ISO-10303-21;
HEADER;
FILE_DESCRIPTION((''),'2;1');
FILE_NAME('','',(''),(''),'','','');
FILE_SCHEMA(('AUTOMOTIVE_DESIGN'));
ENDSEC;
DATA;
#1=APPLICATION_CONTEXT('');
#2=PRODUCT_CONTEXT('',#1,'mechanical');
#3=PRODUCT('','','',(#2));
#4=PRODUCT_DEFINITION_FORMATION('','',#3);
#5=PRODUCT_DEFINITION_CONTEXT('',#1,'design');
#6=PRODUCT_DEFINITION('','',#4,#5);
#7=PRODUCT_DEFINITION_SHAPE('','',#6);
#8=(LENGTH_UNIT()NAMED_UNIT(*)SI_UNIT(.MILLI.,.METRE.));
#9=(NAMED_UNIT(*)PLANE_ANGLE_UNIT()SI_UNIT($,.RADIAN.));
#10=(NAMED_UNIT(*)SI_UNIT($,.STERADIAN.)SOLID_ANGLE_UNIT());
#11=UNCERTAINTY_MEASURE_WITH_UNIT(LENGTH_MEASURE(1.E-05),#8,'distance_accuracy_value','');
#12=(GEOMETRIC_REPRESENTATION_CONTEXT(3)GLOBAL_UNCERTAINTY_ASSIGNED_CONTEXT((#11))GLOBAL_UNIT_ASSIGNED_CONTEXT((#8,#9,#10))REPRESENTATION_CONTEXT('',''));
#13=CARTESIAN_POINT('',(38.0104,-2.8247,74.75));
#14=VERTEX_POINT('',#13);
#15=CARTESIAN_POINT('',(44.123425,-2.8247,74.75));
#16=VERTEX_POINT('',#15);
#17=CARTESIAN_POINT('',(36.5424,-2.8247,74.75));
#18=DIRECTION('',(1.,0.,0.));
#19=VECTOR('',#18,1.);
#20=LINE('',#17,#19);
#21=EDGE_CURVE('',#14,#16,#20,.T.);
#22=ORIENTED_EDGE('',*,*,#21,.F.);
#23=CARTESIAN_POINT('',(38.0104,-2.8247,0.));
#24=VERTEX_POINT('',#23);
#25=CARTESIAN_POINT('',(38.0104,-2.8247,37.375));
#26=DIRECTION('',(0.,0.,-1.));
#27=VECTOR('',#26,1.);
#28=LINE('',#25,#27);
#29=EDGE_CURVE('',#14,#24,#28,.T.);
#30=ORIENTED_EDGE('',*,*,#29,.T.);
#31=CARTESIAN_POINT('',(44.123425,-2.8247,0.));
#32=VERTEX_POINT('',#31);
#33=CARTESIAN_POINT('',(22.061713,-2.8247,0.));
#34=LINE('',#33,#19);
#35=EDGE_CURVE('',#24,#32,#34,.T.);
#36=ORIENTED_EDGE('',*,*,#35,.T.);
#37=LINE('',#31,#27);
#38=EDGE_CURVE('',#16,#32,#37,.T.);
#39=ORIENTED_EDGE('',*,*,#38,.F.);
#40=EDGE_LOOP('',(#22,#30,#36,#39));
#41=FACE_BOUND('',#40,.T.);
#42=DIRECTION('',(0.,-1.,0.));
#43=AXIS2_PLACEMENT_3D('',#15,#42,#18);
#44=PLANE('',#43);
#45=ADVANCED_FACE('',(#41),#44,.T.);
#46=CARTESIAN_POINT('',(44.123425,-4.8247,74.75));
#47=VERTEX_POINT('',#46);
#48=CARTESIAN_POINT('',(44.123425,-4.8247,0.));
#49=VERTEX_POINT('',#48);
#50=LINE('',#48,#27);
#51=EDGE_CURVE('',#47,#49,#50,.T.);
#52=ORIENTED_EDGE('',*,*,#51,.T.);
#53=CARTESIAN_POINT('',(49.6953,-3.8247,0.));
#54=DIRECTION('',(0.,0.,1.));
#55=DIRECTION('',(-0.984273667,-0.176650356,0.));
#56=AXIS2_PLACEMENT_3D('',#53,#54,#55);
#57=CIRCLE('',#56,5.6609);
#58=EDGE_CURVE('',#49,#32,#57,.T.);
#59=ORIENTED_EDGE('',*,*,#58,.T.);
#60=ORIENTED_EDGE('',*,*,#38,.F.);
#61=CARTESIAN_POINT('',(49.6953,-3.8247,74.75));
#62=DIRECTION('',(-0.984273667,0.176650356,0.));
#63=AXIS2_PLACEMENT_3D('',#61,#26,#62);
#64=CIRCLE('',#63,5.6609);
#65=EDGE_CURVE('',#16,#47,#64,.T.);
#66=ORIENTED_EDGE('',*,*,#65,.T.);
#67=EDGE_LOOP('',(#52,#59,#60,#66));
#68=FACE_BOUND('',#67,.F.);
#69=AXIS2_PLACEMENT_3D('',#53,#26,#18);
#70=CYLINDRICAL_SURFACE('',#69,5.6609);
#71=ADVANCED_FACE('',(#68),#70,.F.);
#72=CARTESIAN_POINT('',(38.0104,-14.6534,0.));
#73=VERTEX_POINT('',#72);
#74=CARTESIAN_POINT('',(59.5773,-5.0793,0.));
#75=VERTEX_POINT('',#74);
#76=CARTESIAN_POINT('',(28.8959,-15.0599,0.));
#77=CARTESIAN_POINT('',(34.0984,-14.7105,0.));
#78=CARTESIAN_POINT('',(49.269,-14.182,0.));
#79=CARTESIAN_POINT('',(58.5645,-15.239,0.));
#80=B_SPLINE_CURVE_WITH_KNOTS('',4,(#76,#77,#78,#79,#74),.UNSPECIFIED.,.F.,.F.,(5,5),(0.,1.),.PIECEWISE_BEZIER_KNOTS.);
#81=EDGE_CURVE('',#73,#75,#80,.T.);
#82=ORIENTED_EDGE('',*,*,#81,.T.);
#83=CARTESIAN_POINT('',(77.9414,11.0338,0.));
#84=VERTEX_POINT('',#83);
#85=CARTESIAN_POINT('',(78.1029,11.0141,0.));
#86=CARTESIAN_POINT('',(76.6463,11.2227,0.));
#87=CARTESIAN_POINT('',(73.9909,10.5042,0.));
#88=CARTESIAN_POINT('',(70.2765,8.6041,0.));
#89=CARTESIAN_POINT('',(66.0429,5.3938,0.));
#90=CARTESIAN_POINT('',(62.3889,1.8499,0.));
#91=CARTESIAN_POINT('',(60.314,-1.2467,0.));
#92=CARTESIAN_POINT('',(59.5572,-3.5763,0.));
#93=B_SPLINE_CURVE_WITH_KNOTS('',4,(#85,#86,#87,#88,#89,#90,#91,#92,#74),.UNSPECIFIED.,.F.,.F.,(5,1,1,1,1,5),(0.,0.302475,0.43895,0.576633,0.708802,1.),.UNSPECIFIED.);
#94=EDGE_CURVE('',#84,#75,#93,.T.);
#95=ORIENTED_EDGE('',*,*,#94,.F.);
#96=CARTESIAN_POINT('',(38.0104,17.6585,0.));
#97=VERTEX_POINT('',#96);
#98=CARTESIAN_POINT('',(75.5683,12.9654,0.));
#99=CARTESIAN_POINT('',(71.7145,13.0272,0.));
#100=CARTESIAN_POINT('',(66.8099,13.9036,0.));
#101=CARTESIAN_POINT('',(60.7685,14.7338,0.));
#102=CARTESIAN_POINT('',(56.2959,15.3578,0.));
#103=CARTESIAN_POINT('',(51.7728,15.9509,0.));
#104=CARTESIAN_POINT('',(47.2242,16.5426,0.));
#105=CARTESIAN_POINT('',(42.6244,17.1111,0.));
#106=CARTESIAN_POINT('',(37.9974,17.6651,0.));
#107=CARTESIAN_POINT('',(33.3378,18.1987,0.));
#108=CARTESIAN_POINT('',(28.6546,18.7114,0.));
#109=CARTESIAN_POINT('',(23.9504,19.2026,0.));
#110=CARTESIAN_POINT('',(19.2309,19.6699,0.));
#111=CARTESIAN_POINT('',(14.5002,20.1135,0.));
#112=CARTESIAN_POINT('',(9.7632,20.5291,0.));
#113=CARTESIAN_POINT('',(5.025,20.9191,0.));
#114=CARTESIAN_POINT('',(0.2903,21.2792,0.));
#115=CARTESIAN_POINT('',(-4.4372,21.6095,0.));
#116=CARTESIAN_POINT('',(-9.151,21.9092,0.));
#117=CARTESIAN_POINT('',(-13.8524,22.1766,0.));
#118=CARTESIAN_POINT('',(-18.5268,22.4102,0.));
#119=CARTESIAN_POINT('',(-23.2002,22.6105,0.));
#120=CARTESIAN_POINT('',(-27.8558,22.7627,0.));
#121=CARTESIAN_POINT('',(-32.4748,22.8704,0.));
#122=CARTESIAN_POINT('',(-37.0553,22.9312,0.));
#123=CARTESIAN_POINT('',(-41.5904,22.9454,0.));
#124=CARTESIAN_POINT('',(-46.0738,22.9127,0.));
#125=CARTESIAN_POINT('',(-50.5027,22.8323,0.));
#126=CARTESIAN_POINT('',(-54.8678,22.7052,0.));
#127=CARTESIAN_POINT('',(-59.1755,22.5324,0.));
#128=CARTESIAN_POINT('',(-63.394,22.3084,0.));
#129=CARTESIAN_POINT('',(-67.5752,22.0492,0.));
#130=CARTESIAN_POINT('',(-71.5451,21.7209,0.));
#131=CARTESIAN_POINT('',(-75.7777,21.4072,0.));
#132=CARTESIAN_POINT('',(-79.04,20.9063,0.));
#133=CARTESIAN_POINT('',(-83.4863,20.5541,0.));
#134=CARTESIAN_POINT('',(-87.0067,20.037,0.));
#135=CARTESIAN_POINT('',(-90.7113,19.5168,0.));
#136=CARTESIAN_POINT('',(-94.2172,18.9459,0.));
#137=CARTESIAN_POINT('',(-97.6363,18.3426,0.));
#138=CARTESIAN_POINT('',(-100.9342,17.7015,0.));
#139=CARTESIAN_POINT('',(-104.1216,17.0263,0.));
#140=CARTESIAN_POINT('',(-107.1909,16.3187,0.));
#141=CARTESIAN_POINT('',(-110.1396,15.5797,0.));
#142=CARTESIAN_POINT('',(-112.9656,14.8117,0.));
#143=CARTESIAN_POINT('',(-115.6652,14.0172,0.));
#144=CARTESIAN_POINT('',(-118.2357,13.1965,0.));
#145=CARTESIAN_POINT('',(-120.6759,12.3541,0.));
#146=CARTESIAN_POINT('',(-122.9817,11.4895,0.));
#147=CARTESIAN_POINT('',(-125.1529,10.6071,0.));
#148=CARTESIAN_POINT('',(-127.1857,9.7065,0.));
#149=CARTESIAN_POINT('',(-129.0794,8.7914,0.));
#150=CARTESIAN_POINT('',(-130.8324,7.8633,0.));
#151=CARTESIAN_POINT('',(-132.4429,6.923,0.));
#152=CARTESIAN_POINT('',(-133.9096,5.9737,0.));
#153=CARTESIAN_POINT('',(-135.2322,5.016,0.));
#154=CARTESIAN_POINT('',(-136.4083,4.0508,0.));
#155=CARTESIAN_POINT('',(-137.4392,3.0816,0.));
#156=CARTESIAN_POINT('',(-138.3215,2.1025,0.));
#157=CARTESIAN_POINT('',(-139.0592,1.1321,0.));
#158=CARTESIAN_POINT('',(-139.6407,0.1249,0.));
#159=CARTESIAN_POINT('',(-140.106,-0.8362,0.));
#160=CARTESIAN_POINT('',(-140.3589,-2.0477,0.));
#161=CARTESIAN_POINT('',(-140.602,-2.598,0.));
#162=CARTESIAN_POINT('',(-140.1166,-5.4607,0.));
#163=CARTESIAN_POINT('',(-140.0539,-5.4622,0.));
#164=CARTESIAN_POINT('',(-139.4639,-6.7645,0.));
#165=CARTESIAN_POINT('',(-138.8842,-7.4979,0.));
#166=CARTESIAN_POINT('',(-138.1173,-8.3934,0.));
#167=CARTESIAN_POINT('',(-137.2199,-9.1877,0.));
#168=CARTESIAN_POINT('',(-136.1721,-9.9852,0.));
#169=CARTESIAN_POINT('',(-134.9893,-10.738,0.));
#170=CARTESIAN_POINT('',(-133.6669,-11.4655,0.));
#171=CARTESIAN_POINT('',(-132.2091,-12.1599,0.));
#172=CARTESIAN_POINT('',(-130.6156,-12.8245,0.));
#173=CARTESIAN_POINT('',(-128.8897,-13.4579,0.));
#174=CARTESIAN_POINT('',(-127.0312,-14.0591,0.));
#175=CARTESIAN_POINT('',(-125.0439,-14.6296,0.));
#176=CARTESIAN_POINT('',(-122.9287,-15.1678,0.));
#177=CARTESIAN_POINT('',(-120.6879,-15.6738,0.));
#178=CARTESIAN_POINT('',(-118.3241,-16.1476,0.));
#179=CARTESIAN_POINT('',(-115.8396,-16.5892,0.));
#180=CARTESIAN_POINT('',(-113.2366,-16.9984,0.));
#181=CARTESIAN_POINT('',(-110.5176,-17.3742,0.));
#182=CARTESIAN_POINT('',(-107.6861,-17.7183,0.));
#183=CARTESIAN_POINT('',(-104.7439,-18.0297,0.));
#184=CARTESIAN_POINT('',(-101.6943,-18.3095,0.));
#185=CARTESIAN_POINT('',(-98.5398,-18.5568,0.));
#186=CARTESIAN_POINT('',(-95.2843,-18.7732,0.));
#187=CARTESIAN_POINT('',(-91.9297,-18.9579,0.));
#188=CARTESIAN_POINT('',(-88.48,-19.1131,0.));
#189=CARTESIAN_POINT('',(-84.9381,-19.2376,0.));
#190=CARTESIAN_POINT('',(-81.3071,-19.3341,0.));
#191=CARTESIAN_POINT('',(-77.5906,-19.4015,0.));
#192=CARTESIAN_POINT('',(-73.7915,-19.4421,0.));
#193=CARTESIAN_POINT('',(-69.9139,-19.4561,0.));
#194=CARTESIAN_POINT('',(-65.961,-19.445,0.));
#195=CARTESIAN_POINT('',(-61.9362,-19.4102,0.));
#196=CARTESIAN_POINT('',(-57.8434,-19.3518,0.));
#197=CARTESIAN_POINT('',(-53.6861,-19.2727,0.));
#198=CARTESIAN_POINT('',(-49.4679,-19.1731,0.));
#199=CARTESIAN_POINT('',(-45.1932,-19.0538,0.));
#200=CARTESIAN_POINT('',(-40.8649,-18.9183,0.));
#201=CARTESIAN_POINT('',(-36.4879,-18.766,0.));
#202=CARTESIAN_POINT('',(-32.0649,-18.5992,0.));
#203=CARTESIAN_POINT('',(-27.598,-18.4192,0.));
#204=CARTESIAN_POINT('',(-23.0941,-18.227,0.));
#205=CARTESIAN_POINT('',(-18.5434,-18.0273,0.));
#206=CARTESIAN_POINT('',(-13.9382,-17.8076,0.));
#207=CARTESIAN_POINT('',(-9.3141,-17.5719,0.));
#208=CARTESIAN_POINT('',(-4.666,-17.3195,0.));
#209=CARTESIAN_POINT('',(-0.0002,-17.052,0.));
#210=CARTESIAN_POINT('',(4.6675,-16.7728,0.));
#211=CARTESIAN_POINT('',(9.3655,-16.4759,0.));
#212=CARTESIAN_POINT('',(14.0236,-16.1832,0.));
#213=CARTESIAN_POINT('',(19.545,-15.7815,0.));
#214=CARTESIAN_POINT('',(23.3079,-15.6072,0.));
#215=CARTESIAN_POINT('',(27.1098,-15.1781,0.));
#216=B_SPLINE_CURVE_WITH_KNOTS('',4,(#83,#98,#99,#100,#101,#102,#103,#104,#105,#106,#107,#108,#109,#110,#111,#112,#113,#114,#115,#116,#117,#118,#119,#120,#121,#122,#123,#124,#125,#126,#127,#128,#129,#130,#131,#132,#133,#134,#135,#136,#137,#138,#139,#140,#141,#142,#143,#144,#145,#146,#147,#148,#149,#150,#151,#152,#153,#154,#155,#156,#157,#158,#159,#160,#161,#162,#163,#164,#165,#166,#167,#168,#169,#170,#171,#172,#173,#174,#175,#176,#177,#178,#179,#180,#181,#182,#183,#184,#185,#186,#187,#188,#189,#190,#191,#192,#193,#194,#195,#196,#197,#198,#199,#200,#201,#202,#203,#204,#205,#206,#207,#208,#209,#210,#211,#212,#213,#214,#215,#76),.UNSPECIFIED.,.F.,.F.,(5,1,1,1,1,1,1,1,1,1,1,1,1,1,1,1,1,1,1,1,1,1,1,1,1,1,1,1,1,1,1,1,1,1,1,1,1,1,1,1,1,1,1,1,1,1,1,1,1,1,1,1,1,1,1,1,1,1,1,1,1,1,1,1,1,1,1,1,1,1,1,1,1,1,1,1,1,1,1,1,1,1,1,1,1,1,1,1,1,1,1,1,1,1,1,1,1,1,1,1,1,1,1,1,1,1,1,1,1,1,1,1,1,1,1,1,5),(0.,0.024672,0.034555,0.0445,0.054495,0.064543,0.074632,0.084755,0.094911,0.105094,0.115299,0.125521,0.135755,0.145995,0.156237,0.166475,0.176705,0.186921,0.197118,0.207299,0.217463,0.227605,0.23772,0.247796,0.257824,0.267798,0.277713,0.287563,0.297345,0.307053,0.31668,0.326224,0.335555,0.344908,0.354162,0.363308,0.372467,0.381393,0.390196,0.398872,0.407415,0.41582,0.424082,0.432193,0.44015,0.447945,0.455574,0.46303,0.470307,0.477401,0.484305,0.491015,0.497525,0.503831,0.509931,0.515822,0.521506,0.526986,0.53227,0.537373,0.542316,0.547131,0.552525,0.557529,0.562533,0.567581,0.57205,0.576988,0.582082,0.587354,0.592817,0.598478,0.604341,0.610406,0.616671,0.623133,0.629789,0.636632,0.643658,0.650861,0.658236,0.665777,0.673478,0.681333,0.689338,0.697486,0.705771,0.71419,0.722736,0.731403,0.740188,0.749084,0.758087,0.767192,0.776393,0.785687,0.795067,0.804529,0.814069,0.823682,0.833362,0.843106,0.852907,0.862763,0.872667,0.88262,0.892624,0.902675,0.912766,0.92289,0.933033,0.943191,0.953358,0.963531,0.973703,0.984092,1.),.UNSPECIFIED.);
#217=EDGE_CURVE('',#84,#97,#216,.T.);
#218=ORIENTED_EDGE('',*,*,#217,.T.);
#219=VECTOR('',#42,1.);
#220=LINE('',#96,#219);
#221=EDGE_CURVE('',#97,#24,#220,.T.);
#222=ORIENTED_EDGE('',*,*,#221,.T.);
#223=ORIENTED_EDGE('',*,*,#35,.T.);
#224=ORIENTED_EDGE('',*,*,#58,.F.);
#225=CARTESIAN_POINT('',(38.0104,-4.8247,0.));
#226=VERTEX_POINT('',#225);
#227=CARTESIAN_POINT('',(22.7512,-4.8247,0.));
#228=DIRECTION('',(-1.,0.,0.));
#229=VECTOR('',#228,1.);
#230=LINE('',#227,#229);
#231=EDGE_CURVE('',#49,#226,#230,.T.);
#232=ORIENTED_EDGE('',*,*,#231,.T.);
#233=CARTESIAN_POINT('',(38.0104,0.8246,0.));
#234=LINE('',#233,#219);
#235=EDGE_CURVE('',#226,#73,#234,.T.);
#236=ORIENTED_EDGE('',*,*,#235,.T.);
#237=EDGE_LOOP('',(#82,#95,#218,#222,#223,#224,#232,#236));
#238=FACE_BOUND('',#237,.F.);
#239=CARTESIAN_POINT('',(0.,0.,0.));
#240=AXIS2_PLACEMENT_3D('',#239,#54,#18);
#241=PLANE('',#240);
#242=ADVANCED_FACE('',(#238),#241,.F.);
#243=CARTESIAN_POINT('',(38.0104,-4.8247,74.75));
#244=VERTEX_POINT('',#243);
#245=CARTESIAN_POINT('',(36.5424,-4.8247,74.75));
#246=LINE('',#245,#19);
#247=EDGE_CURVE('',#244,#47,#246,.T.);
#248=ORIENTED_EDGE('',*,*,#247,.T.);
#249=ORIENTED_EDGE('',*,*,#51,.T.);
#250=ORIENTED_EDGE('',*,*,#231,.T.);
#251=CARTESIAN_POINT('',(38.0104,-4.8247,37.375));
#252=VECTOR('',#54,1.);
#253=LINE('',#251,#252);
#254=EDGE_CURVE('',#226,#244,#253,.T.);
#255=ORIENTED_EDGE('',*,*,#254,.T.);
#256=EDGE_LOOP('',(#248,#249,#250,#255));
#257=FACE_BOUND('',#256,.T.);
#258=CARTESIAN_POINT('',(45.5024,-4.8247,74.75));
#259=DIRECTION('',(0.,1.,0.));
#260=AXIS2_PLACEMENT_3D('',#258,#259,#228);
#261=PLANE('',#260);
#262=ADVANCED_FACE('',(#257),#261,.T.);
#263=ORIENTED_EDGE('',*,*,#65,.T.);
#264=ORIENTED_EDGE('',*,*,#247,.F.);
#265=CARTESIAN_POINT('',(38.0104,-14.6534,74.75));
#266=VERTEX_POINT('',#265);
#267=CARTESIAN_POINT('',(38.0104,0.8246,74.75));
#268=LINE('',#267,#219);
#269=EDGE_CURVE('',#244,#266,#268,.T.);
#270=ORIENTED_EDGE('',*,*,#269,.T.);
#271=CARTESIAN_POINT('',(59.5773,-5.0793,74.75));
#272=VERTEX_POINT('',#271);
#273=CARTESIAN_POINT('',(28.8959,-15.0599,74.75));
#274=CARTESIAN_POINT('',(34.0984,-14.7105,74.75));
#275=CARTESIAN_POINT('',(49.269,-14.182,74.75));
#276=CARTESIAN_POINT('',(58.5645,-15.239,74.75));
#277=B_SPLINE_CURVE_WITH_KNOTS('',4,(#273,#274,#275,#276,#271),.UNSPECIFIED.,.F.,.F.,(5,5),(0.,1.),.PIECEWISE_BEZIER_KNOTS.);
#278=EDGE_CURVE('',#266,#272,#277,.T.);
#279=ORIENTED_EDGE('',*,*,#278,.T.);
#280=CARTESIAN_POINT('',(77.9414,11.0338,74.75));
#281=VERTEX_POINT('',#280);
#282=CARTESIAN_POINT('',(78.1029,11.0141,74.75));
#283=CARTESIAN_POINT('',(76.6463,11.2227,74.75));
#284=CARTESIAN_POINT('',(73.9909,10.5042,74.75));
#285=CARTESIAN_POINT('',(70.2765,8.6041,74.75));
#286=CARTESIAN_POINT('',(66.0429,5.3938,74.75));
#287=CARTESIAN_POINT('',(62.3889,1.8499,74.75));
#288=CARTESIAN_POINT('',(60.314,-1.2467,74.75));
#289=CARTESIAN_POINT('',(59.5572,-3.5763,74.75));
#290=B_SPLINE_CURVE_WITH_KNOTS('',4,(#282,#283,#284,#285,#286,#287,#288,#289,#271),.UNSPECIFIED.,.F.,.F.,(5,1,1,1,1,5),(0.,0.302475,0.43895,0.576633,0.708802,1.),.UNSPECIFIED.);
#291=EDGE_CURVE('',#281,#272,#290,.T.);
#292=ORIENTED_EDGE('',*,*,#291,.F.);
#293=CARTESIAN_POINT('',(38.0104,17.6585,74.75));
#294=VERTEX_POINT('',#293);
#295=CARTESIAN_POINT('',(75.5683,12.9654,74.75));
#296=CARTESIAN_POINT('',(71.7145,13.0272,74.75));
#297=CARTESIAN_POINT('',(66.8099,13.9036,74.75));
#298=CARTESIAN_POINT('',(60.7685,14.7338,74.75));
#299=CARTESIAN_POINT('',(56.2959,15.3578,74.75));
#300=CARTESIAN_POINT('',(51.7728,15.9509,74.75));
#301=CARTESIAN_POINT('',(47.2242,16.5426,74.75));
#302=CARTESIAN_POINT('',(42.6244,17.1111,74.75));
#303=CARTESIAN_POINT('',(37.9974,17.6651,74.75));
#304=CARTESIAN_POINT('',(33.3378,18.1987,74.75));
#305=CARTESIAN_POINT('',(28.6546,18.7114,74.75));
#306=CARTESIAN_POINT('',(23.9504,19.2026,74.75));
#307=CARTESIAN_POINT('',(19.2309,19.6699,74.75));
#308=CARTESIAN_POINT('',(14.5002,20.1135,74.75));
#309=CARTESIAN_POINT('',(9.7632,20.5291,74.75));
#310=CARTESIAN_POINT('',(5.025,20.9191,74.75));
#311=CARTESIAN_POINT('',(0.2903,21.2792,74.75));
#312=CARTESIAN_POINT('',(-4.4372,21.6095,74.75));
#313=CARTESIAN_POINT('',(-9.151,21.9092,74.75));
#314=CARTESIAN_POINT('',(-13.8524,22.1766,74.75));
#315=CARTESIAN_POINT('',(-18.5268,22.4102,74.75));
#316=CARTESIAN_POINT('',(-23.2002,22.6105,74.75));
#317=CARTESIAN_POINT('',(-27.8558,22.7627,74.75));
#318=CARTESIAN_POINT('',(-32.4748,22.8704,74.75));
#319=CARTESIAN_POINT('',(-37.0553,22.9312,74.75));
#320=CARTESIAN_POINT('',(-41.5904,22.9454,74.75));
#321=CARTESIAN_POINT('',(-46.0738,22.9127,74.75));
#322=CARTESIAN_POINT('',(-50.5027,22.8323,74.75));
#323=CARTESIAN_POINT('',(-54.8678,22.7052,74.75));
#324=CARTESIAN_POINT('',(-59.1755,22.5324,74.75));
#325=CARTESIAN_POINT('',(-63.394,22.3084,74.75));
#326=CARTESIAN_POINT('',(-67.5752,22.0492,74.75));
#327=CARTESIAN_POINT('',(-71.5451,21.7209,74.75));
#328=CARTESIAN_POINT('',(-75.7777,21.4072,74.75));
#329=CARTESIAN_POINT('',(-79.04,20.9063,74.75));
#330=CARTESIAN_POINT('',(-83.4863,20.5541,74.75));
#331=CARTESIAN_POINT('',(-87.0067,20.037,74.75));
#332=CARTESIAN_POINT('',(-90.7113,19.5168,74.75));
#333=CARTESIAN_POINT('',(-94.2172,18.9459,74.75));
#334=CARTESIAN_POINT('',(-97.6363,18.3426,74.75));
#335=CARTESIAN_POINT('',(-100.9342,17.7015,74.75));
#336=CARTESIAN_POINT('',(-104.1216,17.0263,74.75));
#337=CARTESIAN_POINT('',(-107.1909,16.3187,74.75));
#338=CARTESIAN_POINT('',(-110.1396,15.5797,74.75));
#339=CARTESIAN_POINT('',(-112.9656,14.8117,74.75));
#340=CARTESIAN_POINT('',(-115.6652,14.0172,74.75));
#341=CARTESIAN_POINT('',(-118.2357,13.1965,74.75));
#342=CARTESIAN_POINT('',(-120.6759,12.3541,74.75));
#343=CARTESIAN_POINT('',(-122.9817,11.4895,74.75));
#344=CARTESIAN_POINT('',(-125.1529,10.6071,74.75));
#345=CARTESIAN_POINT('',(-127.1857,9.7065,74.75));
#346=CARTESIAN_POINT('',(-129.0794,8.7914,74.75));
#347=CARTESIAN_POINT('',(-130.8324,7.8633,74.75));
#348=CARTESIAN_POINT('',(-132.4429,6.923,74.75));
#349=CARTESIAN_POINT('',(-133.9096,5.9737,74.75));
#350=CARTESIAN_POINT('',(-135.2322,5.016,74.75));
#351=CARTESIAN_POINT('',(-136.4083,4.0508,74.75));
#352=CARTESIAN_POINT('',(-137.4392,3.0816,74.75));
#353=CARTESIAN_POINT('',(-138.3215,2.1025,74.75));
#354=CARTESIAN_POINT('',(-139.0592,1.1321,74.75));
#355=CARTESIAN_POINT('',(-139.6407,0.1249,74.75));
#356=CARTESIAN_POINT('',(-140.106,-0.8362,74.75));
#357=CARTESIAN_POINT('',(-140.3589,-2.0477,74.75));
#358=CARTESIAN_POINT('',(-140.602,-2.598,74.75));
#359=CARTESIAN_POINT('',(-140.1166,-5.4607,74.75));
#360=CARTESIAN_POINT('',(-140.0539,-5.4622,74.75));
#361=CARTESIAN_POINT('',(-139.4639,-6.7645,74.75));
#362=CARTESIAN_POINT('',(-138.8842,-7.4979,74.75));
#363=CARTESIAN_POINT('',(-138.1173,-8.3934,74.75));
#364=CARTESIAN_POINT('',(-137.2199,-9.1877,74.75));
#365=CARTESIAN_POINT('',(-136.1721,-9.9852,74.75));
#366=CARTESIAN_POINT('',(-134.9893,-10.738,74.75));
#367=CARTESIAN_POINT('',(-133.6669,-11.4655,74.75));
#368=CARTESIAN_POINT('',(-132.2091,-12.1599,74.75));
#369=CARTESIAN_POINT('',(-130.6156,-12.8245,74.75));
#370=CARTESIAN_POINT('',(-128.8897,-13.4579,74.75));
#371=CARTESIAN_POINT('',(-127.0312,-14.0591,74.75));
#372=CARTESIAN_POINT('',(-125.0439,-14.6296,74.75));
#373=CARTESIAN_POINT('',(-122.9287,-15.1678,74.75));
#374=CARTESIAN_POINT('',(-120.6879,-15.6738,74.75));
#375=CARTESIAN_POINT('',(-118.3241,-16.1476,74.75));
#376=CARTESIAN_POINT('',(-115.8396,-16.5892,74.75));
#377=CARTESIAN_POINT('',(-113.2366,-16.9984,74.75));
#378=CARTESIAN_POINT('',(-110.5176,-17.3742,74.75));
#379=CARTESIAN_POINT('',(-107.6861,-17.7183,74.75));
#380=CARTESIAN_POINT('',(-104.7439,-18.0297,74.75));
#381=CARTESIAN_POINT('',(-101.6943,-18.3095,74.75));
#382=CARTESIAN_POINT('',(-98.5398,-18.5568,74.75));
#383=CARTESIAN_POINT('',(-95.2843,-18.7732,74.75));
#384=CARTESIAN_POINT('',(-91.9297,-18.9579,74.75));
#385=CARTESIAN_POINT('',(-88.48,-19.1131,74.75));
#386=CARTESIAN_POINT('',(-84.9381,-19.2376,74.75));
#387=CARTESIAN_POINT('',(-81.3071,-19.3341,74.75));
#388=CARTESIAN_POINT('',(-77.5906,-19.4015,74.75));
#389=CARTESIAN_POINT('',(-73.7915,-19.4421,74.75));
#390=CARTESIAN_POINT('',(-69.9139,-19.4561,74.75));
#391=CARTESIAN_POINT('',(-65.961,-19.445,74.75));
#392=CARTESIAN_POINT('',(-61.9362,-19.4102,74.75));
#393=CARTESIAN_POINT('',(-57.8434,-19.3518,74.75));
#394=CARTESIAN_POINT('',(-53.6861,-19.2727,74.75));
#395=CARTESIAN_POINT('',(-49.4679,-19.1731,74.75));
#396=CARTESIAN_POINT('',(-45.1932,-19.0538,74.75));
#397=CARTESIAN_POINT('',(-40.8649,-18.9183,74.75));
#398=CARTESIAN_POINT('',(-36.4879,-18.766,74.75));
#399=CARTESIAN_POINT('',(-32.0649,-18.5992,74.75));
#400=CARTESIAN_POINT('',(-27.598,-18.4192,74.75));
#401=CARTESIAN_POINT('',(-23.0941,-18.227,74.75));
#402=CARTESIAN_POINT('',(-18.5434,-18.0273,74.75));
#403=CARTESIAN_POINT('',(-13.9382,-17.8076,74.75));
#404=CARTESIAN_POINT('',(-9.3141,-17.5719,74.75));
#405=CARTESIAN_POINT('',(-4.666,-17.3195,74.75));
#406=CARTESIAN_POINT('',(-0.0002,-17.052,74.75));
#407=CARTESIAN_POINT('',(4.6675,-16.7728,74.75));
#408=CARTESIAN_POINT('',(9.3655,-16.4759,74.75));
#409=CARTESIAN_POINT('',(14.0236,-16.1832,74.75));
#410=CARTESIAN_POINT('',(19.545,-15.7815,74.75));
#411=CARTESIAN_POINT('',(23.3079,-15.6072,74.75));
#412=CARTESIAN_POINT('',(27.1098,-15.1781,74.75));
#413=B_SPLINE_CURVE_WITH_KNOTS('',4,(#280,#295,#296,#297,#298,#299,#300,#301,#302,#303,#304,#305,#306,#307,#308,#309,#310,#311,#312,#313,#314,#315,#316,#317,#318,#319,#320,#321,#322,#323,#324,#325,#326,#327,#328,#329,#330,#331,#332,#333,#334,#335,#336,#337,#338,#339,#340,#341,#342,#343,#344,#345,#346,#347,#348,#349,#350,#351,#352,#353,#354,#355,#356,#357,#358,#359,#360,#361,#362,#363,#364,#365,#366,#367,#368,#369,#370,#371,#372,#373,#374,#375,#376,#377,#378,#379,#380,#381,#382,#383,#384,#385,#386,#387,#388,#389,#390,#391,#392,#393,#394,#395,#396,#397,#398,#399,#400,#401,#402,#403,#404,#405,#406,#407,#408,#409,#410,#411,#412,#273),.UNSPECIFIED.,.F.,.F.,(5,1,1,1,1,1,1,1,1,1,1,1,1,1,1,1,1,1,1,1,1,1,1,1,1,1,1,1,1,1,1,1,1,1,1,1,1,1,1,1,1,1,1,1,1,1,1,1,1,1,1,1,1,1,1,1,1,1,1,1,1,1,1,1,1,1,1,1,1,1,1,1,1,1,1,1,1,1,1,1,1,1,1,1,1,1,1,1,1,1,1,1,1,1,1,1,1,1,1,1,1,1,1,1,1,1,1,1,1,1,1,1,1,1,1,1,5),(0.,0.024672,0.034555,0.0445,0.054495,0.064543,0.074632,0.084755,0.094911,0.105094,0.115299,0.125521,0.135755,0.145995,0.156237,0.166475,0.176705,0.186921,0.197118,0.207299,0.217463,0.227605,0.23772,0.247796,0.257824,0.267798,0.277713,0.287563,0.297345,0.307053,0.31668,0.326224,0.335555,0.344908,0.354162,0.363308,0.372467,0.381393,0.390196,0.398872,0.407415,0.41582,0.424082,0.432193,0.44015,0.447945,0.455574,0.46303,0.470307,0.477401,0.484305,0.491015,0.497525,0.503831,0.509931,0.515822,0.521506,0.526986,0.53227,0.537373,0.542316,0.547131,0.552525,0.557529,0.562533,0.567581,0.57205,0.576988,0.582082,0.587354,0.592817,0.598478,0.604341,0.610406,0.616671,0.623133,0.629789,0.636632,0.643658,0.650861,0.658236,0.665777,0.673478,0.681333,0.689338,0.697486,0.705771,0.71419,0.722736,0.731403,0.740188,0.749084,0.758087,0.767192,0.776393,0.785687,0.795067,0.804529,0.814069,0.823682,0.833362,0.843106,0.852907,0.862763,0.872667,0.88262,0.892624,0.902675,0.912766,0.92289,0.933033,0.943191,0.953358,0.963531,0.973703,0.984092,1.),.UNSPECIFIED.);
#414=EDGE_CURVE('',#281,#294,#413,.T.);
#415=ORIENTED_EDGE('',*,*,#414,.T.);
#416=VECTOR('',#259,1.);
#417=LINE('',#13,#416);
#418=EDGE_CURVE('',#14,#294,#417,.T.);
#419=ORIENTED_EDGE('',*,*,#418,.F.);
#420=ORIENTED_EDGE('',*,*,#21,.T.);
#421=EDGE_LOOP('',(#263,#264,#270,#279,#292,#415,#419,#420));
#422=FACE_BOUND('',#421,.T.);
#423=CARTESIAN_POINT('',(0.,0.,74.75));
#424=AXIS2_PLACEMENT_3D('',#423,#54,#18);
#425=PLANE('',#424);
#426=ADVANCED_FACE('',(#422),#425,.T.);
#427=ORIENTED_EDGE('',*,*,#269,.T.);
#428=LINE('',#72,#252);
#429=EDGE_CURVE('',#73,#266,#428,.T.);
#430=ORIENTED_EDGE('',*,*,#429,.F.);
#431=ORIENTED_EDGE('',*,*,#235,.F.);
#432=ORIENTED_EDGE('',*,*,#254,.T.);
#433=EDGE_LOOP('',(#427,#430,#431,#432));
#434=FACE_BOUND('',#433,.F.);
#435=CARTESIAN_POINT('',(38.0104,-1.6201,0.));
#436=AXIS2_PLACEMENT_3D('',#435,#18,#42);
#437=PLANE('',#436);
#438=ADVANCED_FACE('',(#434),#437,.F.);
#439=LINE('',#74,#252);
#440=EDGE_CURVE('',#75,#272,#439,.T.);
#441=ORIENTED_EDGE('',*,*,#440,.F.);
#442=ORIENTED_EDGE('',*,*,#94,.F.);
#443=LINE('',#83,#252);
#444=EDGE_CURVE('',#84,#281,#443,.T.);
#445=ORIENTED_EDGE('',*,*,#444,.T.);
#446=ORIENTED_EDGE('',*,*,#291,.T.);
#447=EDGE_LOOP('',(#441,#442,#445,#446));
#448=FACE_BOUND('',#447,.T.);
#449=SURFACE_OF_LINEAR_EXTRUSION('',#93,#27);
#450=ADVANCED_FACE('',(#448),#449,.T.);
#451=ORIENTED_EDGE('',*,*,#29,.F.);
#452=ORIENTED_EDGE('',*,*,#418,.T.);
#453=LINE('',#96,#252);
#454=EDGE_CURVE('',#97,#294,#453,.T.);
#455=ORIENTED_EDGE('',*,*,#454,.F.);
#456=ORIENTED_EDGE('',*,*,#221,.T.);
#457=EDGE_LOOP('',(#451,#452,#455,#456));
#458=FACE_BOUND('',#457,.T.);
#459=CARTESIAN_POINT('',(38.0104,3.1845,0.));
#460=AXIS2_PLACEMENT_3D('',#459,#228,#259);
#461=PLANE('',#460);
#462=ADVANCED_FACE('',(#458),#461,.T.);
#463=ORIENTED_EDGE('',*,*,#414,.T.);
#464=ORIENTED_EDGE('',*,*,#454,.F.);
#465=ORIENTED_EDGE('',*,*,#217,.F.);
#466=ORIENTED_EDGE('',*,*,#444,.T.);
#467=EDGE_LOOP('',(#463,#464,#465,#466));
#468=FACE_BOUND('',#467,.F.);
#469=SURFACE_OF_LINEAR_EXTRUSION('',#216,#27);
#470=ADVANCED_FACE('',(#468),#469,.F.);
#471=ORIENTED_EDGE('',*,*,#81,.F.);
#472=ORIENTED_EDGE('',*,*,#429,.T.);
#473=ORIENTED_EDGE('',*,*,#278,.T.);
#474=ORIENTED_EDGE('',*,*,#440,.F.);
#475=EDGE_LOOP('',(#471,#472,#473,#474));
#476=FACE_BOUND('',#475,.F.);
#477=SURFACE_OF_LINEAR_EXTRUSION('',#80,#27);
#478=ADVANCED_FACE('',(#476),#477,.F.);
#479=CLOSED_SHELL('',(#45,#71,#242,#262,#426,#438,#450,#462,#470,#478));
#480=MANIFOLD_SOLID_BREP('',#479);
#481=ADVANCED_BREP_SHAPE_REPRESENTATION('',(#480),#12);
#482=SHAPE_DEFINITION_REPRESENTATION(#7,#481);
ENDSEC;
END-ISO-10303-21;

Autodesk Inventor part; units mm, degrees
ref_plane "YZ Plane" through (0, 0, 0) normal (1, 0, 0) x (0, 1, 0)
ref_plane "XZ Plane" through (0, 0, 0) normal (0, 1, 0) x (-1, 0, 0)
ref_plane "XY Plane" through (0, 0, 0) normal (0, 0, 1) x (1, 0, 0)
sketch "Sketch3" plane through (0, 0, 0) normal (0, 0, 1) x (1, 0, 0)
  line L0 (-80.5781, 0.8246) -> (-80.5781, 20.7988) construction
  circle A0 centre (-80.5781, 0.8246) radius 13.481
  line L1 (-53.7179, 12.5571) -> (-53.7179, -10.9927)
  arc A1 (-53.7179, -10.9927) -> (-51.5054, -12.9814) centre (-51.7179, -10.9927) ccw
  arc A2 (-51.5054, 14.5458) -> (-53.7179, 12.5571) centre (-51.7179, 12.5571) ccw
  line L2 (36.2229, -3.6088) -> (-51.5054, -12.9814)
  line L3 (38.0104, 3.1845) -> (38.0104, -1.6201)
  line L4 (-80.5781, 0.8246) -> (49.5525, 0.8246) construction
  circle A3 centre (49.6953, -3.8247) radius 5.6609
  line L5 (59.6953, 14.884) -> (59.6953, -12.7998) construction
  spline S0 degree 4 poles (77.9414, 11.0338) (75.5683, 12.9654) (71.7145, 13.0272) (66.8099, 13.9036) (60.7685, 14.7338) (56.2959, 15.3578) (51.7728, 15.9509) (47.2242, 16.5426) (42.6244, 17.1111) (37.9974, 17.6651) (33.3378, 18.1987) (28.6546, 18.7114) (23.9504, 19.2026) (19.2309, 19.6699) (14.5002, 20.1135) (9.7632, 20.5291) (5.025, 20.9191) (0.2903, 21.2792) (-4.4372, 21.6095) (-9.151, 21.9092) (-13.8524, 22.1766) (-18.5268, 22.4102) (-23.2002, 22.6105) (-27.8558, 22.7627) (-32.4748, 22.8704) (-37.0553, 22.9312) (-41.5904, 22.9454) (-46.0738, 22.9127) (-50.5027, 22.8323) (-54.8678, 22.7052) (-59.1755, 22.5324) (-63.394, 22.3084) (-67.5752, 22.0492) (-71.5451, 21.7209) (-75.7777, 21.4072) (-79.04, 20.9063) (-83.4863, 20.5541) (-87.0067, 20.037) (-90.7113, 19.5168) (-94.2172, 18.9459) (-97.6363, 18.3426) (-100.9342, 17.7015) (-104.1216, 17.0263) (-107.1909, 16.3187) (-110.1396, 15.5797) (-112.9656, 14.8117) (-115.6652, 14.0172) (-118.2357, 13.1965) (-120.6759, 12.3541) (-122.9817, 11.4895) (-125.1529, 10.6071) (-127.1857, 9.7065) (-129.0794, 8.7914) (-130.8324, 7.8633) (-132.4429, 6.923) (-133.9096, 5.9737) (-135.2322, 5.016) (-136.4083, 4.0508) (-137.4392, 3.0816) (-138.3215, 2.1025) (-139.0592, 1.1321) (-139.6407, 0.1249) (-140.106, -0.8362) (-140.3589, -2.0477) (-140.602, -2.598) (-140.1166, -5.4607) (-140.0539, -5.4622) (-139.4639, -6.7645) (-138.8842, -7.4979) (-138.1173, -8.3934) (-137.2199, -9.1877) (-136.1721, -9.9852) (-134.9893, -10.738) (-133.6669, -11.4655) (-132.2091, -12.1599) (-130.6156, -12.8245) (-128.8897, -13.4579) (-127.0312, -14.0591) (-125.0439, -14.6296) (-122.9287, -15.1678) (-120.6879, -15.6738) (-118.3241, -16.1476) (-115.8396, -16.5892) (-113.2366, -16.9984) (-110.5176, -17.3742) (-107.6861, -17.7183) (-104.7439, -18.0297) (-101.6943, -18.3095) (-98.5398, -18.5568) (-95.2843, -18.7732) (-91.9297, -18.9579) (-88.48, -19.1131) (-84.9381, -19.2376) (-81.3071, -19.3341) (-77.5906, -19.4015) (-73.7915, -19.4421) (-69.9139, -19.4561) (-65.961, -19.445) (-61.9362, -19.4102) (-57.8434, -19.3518) (-53.6861, -19.2727) (-49.4679, -19.1731) (-45.1932, -19.0538) (-40.8649, -18.9183) (-36.4879, -18.766) (-32.0649, -18.5992) (-27.598, -18.4192) (-23.0941, -18.227) (-18.5434, -18.0273) (-13.9382, -17.8076) (-9.3141, -17.5719) (-4.666, -17.3195) (-0.0002, -17.052) (4.6675, -16.7728) (9.3655, -16.4759) (14.0236, -16.1832) (19.545, -15.7815) (23.3079, -15.6072) (27.1098, -15.1781) (28.8959, -15.0599) knots 0 0 0 0 0 0.024672 0.034555 0.0445 0.054495 0.064543 0.074632 0.084755 0.094911 0.105094 0.115299 0.125521 0.135755 0.145995 0.156237 0.166475 0.176705 0.186921 0.197118 0.207299 0.217463 0.227605 0.23772 0.247796 0.257824 0.267798 0.277713 0.287563 0.297345 0.307053 0.31668 0.326224 0.335555 0.344908 0.354162 0.363308 0.372467 0.381393 0.390196 0.398872 0.407415 0.41582 0.424082 0.432193 0.44015 0.447945 0.455574 0.46303 0.470307 0.477401 0.484305 0.491015 0.497525 0.503831 0.509931 0.515822 0.521506 0.526986 0.53227 0.537373 0.542316 0.547131 0.552525 0.557529 0.562533 0.567581 0.57205 0.576988 0.582082 0.587354 0.592817 0.598478 0.604341 0.610406 0.616671 0.623133 0.629789 0.636632 0.643658 0.650861 0.658236 0.665777 0.673478 0.681333 0.689338 0.697486 0.705771 0.71419 0.722736 0.731403 0.740188 0.749084 0.758087 0.767192 0.776393 0.785687 0.795067 0.804529 0.814069 0.823682 0.833362 0.843106 0.852907 0.862763 0.872667 0.88262 0.892624 0.902675 0.912766 0.92289 0.933033 0.943191 0.953358 0.963531 0.973703 0.984092 1 1 1 1 1
  line L6 (7.5013, -16.4763) -> (50.2906, -13.6435) construction
  arc A4 (44.8353, -17.2546) -> (13.385, -19.3367) centre (31.5327, -54.8885) ccw construction
  line L7 (159.6953, -3.8066) -> (59.6953, -3.8066) construction
  line L8 (-51.5054, 14.5458) -> (36.2229, 5.1732)
  arc A5 (36.2229, -3.6088) -> (38.0104, -1.6201) centre (36.0104, -1.6201) ccw
  arc A6 (38.0104, 3.1845) -> (36.2229, 5.1732) centre (36.0104, 3.1845) ccw
  spline S1 degree 4 poles (78.1029, 11.0141) (76.6463, 11.2227) (73.9909, 10.5042) (70.2765, 8.6041) (66.0429, 5.3938) (62.3889, 1.8499) (60.314, -1.2467) (59.5572, -3.5763) (59.5773, -5.0793) knots 0 0 0 0 0 0.302475 0.43895 0.576633 0.708802 1 1 1 1 1
  spline S2 degree 4 poles (28.8959, -15.0599) (34.0984, -14.7105) (49.269, -14.182) (58.5645, -15.239) (59.5773, -5.0793) knots 0 0 0 0 0 1 1 1 1 1
  line L9 (28.8959, -15.0599) -> (34.0984, -14.7105) construction
  line L10 (34.0984, -14.7105) -> (49.269, -14.182) construction
  line L11 (49.269, -14.182) -> (58.5645, -15.239) construction
  line L12 (58.5645, -15.239) -> (59.5773, -5.0793) construction
  line L13 (-140.4646, -2.8394) -> (159.4818, -3.8173) construction
  line L14 (-132.0856, 0.6333) -> (-132.0856, -6.3667)
  line L15 (-132.0856, -6.3667) -> (-110.3816, -12.3574)
  line L16 (-110.3816, -12.3574) -> (-104.797, -12.3574)
  line L17 (-104.797, -12.3574) -> (-104.797, -18.0156)
  line L18 (-132.0856, 0.6333) -> (-110.3816, 10.553)
  line L19 (-110.3816, 10.553) -> (-104.1736, 10.553)
  line L20 (-104.1736, 10.553) -> (-104.1736, 17.0026)
  line L21 (38.0104, 0.8246) -> (38.0104, -14.6534)
  line L22 (38.0104, 0.8246) -> (38.0104, 17.6585)
  point P0 (0, 0)
  point P1 (17.6589, 23.5628)
  point P2 (75.883, 10.8572)
  point P3 (72.8647, 9.7686)
  point P4 (69.4179, 7.8149)
  point P5 (66.0452, 5.2617)
  point P6 (63.1887, 2.4463)
  point P7 (61.1228, -0.3317)
  point P8 (59.9357, -2.8689)
  point P9 (-160.0931, -3.8671)
  point P10 (28.8959, -15.0599)
  point P11 (69.5533, 13.4647)
  point P12 (65.1899, 14.1023)
  point P13 (60.7936, 14.7318)
  point P14 (56.3207, 15.3468)
  point P15 (51.7945, 15.947)
  point P16 (47.2398, 16.5346)
  point P17 (42.6414, 17.1053)
  point P18 (33.3491, 18.1925)
  point P19 (28.6632, 18.7055)
  point P20 (23.9568, 19.1966)
  point P21 (19.2348, 19.6643)
  point P22 (14.5017, 20.1074)
  point P23 (9.7623, 20.5238)
  point P24 (5.0217, 20.9132)
  point P25 (0.2844, 21.2735)
  point P26 (-4.4451, 21.6038)
  point P27 (-9.1614, 21.9032)
  point P28 (-13.86, 22.1702)
  point P29 (-18.5361, 22.4036)
  point P30 (-23.211, 22.601)
  point P31 (-27.8721, 22.754)
  point P32 (-32.4966, 22.8611)
  point P33 (-37.0797, 22.9217)
  point P34 (-41.6169, 22.9356)
  point P35 (-46.1028, 22.9023)
  point P36 (-50.5329, 22.8216)
  point P37 (-54.9021, 22.6941)
  point P38 (-59.2065, 22.5195)
  point P39 (-63.4406, 22.2977)
  point P40 (-67.6008, 22.0302)
  point P41 (-71.6806, 21.7165)
  point P42 (-75.6814, 21.3591)
  point P43 (-79.1834, 20.9458)
  point P44 (-83.4048, 20.5095)
  point P45 (-87.1309, 20.023)
  point P46 (-90.7527, 19.494)
  point P47 (-94.2725, 18.9266)
  point P48 (-97.6845, 18.3211)
  point P49 (-100.9861, 17.6791)
  point P50 (-107.2438, 16.2934)
  point P51 (-110.1931, 15.553)
  point P52 (-113.0194, 14.7835)
  point P53 (-115.7191, 13.987)
  point P54 (-118.2898, 13.165)
  point P55 (-120.7294, 12.3201)
  point P56 (-123.0349, 11.454)
  point P57 (-125.2048, 10.569)
  point P58 (-127.2364, 9.6666)
  point P59 (-129.1282, 8.7491)
  point P60 (-130.8786, 7.8185)
  point P61 (-132.486, 6.8762)
  point P62 (-133.9488, 5.9245)
  point P63 (-135.2661, 4.9648)
  point P64 (-136.4363, 3.9987)
  point P65 (-137.4592, 3.0275)
  point P66 (-138.3336, 2.0531)
  point P67 (-139.0591, 1.0763)
  point P68 (-139.6352, 0.0983)
  point P69 (-140.0613, -0.8802)
  point P70 (-140.338, -1.8576)
  point P71 (-140.1239, -5.2398)
  point P72 (-139.9547, -5.7022)
  point P73 (-139.492, -6.6066)
  point P74 (-138.8844, -7.4823)
  point P75 (-138.1328, -8.3292)
  point P76 (-137.2384, -9.147)
  point P77 (-136.202, -9.9355)
  point P78 (-135.0249, -10.6943)
  point P79 (-133.7085, -11.4228)
  point P80 (-132.2548, -12.1206)
  point P81 (-130.6648, -12.7879)
  point P82 (-128.941, -13.4239)
  point P83 (-127.0846, -14.0282)
  point P84 (-125.0983, -14.6009)
  point P85 (-122.9839, -15.1415)
  point P86 (-120.7435, -15.6497)
  point P87 (-118.3798, -16.1256)
  point P88 (-115.8952, -16.569)
  point P89 (-113.2918, -16.9797)
  point P90 (-110.5723, -17.3574)
  point P91 (-107.74, -17.7027)
  point P92 (-101.7463, -18.2964)
  point P93 (-98.5909, -18.5451)
  point P94 (-95.3341, -18.7623)
  point P95 (-91.9783, -18.9484)
  point P96 (-88.5271, -19.1041)
  point P97 (-84.9838, -19.2298)
  point P98 (-81.3514, -19.3267)
  point P99 (-77.6332, -19.3951)
  point P100 (-73.8324, -19.4362)
  point P101 (-69.9531, -19.4509)
  point P102 (-65.9985, -19.4404)
  point P103 (-61.9719, -19.4059)
  point P104 (-57.8772, -19.3483)
  point P105 (-53.718, -19.2694)
  point P106 (-49.4979, -19.1701)
  point P107 (-45.2211, -19.0516)
  point P108 (-40.8909, -18.916)
  point P109 (-36.5118, -18.7642)
  point P110 (-32.0871, -18.5977)
  point P111 (-27.6213, -18.418)
  point P112 (-23.1183, -18.2269)
  point P113 (-18.5646, -18.0247)
  point P114 (-13.9566, -17.8054)
  point P115 (-9.3252, -17.5693)
  point P116 (-4.674, -17.317)
  point P117 (-0.0078, -17.05)
  point P118 (4.6686, -16.7695)
  point P119 (9.3513, -16.477)
  point P120 (14.0352, -16.1731)
  point P121 (18.7161, -15.8596)
  point P122 (23.3889, -15.5371)
  point P123 (78.0825, 12.164)
  point P124 (159.2574, -3.8401)
  point P125 (158.8836, -3.8779)
  point P126 (158.3607, -3.9307)
  point P127 (157.6896, -3.9985)
  point P128 (156.8706, -4.081)
  point P129 (155.9046, -4.1779)
  point P130 (154.7931, -4.2892)
  point P131 (153.5367, -4.4143)
  point P132 (152.1372, -4.5532)
  point P133 (150.5955, -4.7056)
  point P134 (148.914, -4.8712)
  point P135 (147.0936, -5.0494)
  point P136 (145.137, -5.2399)
  point P137 (143.0457, -5.4421)
  point P138 (140.8221, -5.6563)
  point P139 (138.4686, -5.8813)
  point P140 (135.9876, -6.1174)
  point P141 (133.3815, -6.3634)
  point P142 (130.6533, -6.6196)
  point P143 (127.8054, -6.8851)
  point P144 (124.8414, -7.1596)
  point P145 (121.7634, -7.4428)
  point P146 (118.5756, -7.7341)
  point P147 (115.2804, -8.0332)
  point P148 (111.8817, -8.3395)
  point P149 (108.3828, -8.6527)
  point P150 (104.787, -8.9722)
  point P151 (101.0985, -9.2974)
  point P152 (97.3206, -9.6283)
  point P153 (93.4572, -9.9643)
  point P154 (89.5122, -10.3048)
  point P155 (85.4898, -10.6492)
  point P156 (81.3936, -10.9969)
  point P157 (77.2284, -11.3479)
  point P158 (72.9975, -11.701)
  point P159 (68.7057, -12.0556)
  point P160 (64.3572, -12.4117)
  point P161 (59.9559, -12.7678)
  point P162 (55.5069, -13.1239)
  point P163 (51.0138, -13.4788)
  point P164 (46.4817, -13.8316)
  point P165 (41.9148, -14.182)
  point P166 (35.7035, -14.3277)
  point P167 (32.6946, -14.8708)
  point P168 (82.2459, 11.5043)
  point P169 (86.3364, 10.8401)
  point P170 (90.3495, 10.1732)
  point P171 (94.2816, 9.5051)
  point P172 (98.1288, 8.837)
  point P173 (101.8872, 8.171)
  point P174 (105.5538, 7.5086)
  point P175 (109.1244, 6.8507)
  point P176 (112.596, 6.1997)
  point P177 (115.9653, 5.5565)
  point P178 (119.2287, 4.9229)
  point P179 (122.3835, 4.3007)
  point P180 (125.4264, 3.6911)
  point P181 (128.3547, 3.0956)
  point P182 (131.1654, 2.5157)
  point P183 (133.8561, 1.9532)
  point P184 (136.4244, 1.4093)
  point P185 (138.8676, 0.8855)
  point P186 (141.1833, 0.383)
  point P187 (143.3697, -0.0964)
  point P188 (145.4247, -0.5518)
  point P189 (147.3462, -0.9817)
  point P190 (149.1327, -1.3852)
  point P191 (150.7821, -1.7608)
  point P192 (152.2935, -2.1073)
  point P193 (153.6651, -2.4241)
  point P194 (154.8954, -2.7103)
  point P195 (155.9838, -2.9647)
  point P196 (156.9291, -3.187)
  point P197 (157.7307, -3.376)
  point P198 (158.3871, -3.5317)
  point P199 (158.8986, -3.6529)
  dimension "d3" = 26.962
  dimension "d6" = 11.3219
  dimension "d7" = 110
  dimension "d8" = 100
  dimension "d9" = 2
  dimension "d11" = 4.6493
  dimension "d25" = 7
  dimension "d26" = 3.5
  dimension "d27" = 8.379
  dimension "d28" = 30.083
  dimension "d29" = 5
  dimension "d30" = 5
  dimension "d31" = 59.8865
extrude "Extrusion3" add sketch "Sketch3" along normal blind 74.75 contours L22 S0 S1 S2 L21 L3
sketch "Sketch4" plane through (0, 0, 74.75) normal (0, 0, 1) x (1, 0, 0)
  circle A0 centre (49.6953, -3.8247) radius 5.6609 projected
  line L0 (44.0343, -3.8247) -> (38.0104, -3.8247) construction
  line L1 (38.0104, 17.6585) -> (38.0104, -14.6534) projected
  line L2 (45.5024, -4.8247) -> (36.5424, -4.8247)
  line L3 (36.5424, -4.8247) -> (36.5424, -2.8247)
  line L4 (36.5424, -2.8247) -> (45.5024, -2.8247)
  line L5 (45.5024, -2.8247) -> (45.5024, -4.8247)
  line L6 (45.5024, -4.8247) -> (36.5424, -2.8247) construction
  line L7 (36.5424, -4.8247) -> (45.5024, -2.8247) construction
  point P0 (0, 0)
  point P1 (41.0224, -3.8247)
  dimension "d34" = 8.96
  dimension "d35" = 2
extrude "Extrusion4" cut sketch "Sketch4" against normal blind 103.75 contours L4 L5 L2 A0 | A0 L2 L1 L4 | L1 L2 L3 L4 picked at (45.0164, -3.9363)
properties part number "4P.01.01.11-TW-v1-WingRibWFlapSingle" material "Polyurethane Foam"
